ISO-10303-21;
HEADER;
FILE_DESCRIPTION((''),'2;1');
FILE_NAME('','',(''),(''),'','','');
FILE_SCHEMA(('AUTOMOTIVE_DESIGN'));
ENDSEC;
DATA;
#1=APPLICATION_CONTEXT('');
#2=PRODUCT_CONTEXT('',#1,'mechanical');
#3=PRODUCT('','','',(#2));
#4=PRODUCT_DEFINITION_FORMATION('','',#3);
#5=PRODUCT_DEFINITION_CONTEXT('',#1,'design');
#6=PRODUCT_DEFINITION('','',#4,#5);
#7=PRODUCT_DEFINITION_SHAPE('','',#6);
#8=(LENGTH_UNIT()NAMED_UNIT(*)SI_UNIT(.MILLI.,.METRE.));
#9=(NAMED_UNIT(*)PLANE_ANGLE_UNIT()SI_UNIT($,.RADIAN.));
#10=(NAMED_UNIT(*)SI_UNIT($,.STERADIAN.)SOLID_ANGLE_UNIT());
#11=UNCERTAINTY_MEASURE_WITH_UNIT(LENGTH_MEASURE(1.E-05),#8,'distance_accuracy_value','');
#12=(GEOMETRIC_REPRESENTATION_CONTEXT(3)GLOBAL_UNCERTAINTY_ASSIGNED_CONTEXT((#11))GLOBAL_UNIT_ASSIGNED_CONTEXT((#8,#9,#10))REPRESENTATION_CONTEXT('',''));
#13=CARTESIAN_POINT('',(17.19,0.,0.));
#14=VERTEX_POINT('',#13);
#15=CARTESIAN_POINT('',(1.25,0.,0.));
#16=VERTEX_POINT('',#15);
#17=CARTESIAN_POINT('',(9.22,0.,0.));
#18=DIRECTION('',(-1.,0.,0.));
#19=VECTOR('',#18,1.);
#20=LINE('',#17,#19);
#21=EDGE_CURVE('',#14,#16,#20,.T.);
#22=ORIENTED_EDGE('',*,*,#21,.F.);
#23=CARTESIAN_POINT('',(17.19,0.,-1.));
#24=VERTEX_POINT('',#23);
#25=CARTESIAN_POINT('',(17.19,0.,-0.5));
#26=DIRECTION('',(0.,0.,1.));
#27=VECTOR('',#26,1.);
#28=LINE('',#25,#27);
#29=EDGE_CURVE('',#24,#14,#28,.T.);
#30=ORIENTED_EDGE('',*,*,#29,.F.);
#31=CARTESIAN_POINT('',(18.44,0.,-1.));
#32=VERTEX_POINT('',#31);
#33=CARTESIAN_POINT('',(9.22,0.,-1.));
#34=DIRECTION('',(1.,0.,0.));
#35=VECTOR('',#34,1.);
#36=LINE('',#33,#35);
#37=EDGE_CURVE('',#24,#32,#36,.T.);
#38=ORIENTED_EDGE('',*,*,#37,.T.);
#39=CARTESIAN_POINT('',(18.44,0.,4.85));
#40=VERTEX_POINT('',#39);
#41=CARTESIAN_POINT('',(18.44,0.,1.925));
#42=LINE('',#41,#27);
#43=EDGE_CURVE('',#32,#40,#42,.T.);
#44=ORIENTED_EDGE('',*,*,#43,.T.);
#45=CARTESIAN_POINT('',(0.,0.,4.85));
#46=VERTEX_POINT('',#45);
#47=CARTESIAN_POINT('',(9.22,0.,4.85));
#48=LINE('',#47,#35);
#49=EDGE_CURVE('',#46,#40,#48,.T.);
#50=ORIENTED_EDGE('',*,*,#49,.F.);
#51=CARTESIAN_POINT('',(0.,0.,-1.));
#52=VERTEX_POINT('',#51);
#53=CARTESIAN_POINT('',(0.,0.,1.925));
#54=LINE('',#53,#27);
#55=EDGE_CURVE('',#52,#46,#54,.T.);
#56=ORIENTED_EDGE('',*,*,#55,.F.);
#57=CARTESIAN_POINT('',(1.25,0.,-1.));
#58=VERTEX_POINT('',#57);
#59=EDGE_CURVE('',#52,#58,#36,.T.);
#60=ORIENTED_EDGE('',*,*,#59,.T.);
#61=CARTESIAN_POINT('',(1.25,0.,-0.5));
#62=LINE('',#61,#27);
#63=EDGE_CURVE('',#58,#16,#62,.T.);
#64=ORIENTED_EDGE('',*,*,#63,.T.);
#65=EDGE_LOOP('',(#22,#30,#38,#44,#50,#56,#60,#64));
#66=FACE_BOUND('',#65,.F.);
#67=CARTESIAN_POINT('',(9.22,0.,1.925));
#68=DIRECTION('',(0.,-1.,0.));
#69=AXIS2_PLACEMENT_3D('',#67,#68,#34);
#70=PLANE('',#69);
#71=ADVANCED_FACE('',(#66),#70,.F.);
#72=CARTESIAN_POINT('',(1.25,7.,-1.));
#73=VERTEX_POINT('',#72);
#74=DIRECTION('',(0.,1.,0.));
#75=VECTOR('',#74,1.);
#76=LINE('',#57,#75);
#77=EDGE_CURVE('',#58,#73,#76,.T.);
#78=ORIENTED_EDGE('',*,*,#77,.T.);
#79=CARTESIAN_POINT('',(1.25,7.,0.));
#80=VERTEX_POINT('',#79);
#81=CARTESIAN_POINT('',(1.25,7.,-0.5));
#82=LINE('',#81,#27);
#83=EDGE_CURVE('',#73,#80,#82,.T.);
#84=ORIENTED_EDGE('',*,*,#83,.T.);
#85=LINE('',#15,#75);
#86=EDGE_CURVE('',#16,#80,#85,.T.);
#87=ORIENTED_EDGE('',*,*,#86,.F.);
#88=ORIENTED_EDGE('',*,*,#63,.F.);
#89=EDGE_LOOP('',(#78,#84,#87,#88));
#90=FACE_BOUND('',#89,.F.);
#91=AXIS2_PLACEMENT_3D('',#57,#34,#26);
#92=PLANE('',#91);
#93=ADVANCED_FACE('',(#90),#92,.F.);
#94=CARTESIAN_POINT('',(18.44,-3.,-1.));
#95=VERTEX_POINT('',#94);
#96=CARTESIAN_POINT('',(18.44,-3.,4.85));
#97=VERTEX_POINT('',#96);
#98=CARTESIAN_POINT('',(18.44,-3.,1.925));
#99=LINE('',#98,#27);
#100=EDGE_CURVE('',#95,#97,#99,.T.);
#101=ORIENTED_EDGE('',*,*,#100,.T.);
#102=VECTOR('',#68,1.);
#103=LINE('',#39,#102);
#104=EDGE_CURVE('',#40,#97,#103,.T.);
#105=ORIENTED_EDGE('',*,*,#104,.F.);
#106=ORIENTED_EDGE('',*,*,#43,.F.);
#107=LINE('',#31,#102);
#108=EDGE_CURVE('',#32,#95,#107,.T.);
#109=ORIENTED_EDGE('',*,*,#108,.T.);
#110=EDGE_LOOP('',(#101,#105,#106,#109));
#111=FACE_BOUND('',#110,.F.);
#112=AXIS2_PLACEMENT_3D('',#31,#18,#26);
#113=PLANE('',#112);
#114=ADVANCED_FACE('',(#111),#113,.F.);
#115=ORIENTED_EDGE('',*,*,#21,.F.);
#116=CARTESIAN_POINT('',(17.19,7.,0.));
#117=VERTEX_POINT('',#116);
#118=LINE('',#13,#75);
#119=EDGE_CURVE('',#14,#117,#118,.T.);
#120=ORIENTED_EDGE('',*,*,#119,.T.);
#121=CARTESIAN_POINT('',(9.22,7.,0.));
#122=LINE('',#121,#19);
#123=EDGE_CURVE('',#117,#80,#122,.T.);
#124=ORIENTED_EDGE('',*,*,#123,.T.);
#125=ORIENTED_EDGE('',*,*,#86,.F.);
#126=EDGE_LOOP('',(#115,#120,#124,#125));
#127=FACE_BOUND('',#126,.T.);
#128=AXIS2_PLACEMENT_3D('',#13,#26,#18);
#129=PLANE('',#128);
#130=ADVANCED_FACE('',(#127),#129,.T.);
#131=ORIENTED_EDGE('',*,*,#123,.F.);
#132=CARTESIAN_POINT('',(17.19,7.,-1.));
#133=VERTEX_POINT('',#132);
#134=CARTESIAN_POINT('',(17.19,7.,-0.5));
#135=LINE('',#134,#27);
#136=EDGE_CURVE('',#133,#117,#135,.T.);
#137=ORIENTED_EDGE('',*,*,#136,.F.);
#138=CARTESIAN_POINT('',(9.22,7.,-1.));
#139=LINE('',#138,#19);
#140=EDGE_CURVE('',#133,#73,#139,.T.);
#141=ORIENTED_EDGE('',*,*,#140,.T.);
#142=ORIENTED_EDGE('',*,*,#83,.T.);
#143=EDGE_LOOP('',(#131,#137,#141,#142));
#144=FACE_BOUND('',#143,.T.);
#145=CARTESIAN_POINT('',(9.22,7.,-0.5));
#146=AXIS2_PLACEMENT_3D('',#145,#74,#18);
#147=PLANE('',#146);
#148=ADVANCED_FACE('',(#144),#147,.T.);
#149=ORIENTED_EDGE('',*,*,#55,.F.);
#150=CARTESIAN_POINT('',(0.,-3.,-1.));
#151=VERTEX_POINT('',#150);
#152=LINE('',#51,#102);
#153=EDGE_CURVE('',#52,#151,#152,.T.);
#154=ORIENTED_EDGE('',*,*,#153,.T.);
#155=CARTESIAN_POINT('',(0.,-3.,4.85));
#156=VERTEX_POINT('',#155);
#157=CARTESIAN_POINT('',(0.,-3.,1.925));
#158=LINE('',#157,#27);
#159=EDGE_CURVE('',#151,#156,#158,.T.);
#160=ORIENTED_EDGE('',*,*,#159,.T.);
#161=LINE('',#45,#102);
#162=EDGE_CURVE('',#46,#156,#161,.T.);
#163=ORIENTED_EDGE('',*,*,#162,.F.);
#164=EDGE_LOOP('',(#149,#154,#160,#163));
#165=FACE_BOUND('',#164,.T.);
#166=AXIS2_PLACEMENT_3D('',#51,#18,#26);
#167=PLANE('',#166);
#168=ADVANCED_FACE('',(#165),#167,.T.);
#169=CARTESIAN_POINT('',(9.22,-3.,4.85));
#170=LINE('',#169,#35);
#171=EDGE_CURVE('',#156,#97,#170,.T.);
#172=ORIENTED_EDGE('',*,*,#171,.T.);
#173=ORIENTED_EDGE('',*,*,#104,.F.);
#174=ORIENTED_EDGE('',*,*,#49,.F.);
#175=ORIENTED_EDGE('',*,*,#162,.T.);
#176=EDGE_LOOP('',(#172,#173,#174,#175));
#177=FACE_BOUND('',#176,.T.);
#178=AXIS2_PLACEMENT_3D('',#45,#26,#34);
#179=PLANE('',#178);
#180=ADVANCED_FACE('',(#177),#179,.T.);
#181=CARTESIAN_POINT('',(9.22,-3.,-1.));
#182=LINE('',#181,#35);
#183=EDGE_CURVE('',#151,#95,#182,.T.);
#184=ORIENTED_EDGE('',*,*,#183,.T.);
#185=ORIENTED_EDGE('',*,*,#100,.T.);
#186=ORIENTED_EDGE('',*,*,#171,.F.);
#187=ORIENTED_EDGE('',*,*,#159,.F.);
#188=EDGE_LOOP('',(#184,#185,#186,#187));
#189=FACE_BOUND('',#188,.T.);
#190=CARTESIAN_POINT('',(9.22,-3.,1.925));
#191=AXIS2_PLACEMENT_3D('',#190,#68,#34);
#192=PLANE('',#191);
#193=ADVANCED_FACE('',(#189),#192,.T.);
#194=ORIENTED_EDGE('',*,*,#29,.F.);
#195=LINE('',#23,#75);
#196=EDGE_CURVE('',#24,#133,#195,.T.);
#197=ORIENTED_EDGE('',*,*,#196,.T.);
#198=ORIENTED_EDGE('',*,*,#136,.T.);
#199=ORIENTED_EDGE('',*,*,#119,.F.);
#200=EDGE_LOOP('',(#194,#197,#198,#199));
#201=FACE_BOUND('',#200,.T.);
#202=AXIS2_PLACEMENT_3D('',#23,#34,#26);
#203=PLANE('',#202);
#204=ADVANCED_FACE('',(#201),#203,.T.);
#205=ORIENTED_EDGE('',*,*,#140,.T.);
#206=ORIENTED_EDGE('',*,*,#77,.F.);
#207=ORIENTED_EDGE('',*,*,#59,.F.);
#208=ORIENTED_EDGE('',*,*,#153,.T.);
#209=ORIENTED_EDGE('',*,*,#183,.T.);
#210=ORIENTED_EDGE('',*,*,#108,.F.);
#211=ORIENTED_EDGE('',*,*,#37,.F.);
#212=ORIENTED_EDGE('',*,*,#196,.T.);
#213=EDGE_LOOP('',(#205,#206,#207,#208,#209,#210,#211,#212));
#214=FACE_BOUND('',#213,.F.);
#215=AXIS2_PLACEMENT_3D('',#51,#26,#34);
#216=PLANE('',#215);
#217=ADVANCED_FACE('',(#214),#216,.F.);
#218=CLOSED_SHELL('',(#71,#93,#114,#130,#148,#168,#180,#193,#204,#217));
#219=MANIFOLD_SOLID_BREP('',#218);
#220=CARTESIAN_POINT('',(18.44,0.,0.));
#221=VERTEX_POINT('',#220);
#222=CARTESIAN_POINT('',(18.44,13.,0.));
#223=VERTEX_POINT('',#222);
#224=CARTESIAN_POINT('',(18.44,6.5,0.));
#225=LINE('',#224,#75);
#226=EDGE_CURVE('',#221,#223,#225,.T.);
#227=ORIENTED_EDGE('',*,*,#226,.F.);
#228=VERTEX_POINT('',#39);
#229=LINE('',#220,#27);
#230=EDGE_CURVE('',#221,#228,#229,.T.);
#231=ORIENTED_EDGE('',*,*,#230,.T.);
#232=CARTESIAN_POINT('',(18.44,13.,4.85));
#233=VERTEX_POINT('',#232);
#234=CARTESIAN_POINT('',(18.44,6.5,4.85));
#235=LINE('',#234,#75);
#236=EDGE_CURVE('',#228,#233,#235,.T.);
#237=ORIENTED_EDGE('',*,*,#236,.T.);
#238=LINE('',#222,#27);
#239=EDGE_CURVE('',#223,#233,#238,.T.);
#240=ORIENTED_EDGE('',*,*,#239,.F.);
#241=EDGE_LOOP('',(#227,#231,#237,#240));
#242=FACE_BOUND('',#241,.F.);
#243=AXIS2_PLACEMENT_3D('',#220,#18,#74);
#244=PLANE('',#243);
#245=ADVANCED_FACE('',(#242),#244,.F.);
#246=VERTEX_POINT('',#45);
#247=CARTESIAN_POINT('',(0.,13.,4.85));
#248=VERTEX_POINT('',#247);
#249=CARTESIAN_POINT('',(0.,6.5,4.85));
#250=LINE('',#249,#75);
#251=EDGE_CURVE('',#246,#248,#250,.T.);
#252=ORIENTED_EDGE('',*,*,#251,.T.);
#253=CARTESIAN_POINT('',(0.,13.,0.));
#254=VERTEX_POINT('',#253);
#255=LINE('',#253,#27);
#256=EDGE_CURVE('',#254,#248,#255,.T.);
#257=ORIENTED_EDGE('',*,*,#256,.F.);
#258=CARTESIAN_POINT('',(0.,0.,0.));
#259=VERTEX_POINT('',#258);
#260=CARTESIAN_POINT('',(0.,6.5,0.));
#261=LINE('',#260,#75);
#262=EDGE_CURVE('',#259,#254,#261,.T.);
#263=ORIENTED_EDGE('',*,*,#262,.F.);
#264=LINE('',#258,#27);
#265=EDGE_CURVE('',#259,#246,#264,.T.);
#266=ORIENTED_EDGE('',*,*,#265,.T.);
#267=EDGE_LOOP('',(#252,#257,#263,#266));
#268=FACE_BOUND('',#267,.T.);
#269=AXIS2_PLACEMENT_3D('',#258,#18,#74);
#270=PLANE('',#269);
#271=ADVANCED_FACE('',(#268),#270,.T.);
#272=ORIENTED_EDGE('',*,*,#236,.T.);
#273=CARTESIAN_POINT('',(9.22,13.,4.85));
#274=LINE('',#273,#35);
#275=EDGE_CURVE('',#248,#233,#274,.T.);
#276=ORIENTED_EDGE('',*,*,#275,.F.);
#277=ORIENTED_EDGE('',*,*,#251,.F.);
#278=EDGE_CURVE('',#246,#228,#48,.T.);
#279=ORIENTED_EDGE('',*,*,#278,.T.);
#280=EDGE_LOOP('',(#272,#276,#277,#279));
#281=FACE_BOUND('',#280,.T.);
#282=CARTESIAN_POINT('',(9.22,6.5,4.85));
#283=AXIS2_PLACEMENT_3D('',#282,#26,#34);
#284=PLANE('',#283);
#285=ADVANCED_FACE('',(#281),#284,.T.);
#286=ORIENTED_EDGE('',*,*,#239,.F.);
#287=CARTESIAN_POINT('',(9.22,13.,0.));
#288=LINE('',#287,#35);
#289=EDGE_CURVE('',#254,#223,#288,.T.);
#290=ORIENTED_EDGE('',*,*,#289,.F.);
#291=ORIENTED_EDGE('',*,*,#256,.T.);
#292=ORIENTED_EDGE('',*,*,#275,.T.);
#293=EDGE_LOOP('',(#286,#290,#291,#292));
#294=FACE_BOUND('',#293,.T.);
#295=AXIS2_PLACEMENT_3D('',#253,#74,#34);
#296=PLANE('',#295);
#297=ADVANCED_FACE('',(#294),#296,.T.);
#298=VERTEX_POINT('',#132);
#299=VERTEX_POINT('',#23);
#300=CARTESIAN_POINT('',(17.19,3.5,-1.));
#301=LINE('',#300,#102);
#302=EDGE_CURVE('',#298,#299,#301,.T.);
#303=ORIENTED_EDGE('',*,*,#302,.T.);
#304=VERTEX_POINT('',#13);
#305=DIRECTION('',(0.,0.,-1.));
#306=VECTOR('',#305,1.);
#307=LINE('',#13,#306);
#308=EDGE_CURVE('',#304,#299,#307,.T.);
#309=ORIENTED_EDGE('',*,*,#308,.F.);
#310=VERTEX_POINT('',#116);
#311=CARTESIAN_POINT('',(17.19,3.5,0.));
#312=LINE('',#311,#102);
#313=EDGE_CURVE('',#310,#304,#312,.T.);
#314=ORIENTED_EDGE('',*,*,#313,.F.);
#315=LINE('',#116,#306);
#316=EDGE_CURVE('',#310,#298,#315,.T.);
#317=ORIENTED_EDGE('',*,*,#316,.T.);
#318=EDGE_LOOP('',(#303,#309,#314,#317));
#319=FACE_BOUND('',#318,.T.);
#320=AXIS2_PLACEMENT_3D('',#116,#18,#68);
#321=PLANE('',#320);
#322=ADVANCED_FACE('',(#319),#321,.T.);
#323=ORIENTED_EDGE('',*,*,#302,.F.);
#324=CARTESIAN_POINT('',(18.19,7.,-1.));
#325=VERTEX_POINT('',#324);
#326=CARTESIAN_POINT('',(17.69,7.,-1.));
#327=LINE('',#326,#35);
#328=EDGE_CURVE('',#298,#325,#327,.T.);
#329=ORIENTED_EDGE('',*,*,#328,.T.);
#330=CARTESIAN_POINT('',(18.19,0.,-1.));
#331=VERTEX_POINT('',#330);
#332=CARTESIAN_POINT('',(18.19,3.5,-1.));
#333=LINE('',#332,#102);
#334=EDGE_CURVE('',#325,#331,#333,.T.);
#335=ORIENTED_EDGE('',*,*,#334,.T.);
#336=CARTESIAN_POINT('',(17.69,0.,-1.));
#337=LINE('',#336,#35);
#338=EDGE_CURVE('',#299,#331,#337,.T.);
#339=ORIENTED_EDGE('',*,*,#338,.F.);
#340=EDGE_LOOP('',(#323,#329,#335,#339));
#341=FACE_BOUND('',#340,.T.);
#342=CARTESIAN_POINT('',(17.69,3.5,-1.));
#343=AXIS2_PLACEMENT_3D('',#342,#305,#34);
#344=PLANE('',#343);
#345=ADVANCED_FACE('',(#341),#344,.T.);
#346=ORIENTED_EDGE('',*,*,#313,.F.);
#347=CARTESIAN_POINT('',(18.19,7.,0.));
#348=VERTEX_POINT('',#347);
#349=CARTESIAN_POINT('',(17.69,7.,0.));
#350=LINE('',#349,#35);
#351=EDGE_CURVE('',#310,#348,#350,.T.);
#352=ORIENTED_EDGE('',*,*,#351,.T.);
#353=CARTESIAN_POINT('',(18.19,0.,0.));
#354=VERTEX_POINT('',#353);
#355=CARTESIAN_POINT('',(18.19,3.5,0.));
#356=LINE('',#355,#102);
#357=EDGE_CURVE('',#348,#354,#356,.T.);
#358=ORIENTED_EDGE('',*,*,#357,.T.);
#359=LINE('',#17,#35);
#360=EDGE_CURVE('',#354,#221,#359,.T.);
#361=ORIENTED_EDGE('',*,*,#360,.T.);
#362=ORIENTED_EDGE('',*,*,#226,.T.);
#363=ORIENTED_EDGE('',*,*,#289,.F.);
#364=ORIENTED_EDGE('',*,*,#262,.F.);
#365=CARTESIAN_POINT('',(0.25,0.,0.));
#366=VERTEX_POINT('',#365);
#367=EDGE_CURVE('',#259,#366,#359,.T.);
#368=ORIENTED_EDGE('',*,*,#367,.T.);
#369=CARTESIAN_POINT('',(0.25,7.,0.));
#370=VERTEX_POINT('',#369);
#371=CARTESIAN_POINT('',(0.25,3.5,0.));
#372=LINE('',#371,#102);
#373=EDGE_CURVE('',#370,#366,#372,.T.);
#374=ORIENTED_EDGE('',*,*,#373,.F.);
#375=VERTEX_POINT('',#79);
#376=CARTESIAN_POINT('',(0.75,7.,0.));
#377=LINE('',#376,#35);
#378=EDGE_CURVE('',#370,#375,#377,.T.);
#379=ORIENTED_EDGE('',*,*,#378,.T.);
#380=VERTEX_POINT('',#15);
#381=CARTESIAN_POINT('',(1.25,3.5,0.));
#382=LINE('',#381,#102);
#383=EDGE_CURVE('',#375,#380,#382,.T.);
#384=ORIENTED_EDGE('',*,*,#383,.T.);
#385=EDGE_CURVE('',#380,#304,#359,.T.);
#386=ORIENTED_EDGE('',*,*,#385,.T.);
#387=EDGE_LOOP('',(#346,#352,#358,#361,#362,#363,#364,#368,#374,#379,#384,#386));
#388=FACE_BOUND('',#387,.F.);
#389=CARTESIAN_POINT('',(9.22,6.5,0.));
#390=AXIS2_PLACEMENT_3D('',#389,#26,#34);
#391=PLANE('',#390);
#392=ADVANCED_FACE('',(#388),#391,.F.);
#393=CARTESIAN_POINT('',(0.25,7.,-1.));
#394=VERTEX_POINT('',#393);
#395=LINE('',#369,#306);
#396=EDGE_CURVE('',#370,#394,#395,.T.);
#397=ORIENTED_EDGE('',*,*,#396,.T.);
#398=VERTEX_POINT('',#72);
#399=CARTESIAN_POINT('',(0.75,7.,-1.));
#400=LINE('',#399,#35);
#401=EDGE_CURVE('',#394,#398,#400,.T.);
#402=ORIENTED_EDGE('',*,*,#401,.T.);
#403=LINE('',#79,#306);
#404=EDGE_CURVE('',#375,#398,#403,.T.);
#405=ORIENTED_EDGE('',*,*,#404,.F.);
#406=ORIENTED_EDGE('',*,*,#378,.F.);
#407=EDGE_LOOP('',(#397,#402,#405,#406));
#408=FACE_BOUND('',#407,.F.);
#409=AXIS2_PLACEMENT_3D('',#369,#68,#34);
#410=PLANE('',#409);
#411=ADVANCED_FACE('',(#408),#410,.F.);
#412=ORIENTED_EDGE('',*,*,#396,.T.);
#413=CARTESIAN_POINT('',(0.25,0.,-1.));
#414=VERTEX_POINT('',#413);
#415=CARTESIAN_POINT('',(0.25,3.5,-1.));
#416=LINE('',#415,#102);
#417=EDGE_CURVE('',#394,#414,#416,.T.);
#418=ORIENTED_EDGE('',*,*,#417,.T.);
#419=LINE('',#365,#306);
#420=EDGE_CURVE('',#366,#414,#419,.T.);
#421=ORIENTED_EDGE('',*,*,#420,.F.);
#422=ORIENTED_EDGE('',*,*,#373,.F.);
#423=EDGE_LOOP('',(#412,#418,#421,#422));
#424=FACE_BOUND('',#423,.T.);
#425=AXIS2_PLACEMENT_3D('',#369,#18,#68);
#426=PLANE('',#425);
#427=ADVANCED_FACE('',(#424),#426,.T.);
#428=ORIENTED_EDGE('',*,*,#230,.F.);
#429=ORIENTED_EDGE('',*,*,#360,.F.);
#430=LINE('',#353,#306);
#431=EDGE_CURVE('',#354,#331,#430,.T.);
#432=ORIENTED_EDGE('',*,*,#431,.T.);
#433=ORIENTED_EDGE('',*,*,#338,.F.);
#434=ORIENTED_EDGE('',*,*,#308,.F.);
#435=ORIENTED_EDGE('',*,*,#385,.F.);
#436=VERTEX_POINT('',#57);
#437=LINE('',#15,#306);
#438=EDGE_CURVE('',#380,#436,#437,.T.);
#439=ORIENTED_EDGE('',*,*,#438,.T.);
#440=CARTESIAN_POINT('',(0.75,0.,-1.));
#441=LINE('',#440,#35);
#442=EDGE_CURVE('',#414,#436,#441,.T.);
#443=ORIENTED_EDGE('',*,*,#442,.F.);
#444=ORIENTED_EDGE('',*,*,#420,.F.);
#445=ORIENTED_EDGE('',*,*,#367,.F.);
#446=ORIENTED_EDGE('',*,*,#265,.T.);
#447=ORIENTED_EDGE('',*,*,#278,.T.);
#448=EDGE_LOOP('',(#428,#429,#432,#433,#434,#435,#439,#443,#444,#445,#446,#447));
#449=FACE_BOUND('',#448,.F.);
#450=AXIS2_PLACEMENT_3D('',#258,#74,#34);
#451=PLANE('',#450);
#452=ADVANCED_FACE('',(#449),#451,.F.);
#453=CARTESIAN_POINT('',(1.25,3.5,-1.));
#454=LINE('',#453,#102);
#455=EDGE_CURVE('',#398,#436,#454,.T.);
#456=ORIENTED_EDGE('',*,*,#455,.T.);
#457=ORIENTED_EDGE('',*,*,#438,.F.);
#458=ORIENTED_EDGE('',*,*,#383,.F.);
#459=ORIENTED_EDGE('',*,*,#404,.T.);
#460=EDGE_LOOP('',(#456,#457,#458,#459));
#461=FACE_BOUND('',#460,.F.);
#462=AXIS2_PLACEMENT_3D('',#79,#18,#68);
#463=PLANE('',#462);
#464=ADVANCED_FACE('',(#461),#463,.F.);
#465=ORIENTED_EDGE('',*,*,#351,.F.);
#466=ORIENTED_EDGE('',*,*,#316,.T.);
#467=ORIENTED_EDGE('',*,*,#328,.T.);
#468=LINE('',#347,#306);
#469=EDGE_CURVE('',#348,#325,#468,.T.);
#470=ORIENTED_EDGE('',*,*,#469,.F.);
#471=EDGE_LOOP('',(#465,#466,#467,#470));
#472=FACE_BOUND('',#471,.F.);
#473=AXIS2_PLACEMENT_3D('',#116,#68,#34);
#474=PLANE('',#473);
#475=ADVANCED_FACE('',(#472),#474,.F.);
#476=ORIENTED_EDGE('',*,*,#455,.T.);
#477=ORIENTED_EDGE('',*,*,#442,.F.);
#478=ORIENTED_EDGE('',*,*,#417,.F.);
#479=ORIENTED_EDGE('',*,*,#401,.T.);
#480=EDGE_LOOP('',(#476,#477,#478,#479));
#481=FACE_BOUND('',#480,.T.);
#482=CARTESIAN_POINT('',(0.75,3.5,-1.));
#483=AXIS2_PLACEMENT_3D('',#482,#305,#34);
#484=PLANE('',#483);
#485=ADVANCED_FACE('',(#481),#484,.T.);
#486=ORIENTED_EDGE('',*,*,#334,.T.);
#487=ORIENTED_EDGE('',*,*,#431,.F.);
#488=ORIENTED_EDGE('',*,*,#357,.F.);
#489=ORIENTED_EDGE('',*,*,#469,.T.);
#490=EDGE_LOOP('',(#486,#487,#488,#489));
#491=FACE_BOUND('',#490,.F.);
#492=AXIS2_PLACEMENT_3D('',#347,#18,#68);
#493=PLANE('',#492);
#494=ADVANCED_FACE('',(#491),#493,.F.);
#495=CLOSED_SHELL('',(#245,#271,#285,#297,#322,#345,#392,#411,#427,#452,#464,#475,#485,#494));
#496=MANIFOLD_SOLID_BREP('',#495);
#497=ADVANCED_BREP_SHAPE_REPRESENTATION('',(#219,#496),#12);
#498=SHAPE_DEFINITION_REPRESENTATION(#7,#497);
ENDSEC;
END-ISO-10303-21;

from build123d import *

# Parameters (mm, degrees)
F0_W     = 18.44
F0_H     = 13
F1_DEPTH = 4.85
F2_W     = 1
F2_H     = 7
F3_DEPTH = 1
F4_W     = 18.44
F4_H     = 5.85
F5_DEPTH = 3
F6_W     = 15.94
F6_H     = 1
F7_DEPTH = 7


with BuildPart() as f1:
    # F0 (on Top) → F1 (new body)
    with BuildSketch(Plane.XY):
        with Locations((9.22, 6.5)):
            Rectangle(F0_W, F0_H)
    extrude(amount=F1_DEPTH)

    # F2 (on face) → F3 (join)
    with BuildSketch(Plane(origin=(0, 0, 0), x_dir=(1, 0, 0), z_dir=(0, 0, -1))):
        with Locations((0.75, -3.5)):
            Rectangle(F2_W, F2_H)
        with Locations((17.69, -3.5)):
            Rectangle(F2_W, F2_H)
    extrude(amount=F3_DEPTH)


with BuildPart() as f5:
    # F4 (on face) → F5 (new body)
    with BuildSketch(Plane.XZ):
        with Locations((9.22, 1.925)):
            Rectangle(F4_W, F4_H)
    extrude(amount=F5_DEPTH)

    # F6 (on face) → F7 (join, through all)
    with BuildSketch(Plane(origin=(0, 0, 0), x_dir=(-1, 0, 0), z_dir=(0, 1, 0))):
        with Locations((-9.22, -0.5)):
            Rectangle(F6_W, F6_H)
    extrude(amount=F7_DEPTH)


solid = Compound([f1.part, f5.part])
